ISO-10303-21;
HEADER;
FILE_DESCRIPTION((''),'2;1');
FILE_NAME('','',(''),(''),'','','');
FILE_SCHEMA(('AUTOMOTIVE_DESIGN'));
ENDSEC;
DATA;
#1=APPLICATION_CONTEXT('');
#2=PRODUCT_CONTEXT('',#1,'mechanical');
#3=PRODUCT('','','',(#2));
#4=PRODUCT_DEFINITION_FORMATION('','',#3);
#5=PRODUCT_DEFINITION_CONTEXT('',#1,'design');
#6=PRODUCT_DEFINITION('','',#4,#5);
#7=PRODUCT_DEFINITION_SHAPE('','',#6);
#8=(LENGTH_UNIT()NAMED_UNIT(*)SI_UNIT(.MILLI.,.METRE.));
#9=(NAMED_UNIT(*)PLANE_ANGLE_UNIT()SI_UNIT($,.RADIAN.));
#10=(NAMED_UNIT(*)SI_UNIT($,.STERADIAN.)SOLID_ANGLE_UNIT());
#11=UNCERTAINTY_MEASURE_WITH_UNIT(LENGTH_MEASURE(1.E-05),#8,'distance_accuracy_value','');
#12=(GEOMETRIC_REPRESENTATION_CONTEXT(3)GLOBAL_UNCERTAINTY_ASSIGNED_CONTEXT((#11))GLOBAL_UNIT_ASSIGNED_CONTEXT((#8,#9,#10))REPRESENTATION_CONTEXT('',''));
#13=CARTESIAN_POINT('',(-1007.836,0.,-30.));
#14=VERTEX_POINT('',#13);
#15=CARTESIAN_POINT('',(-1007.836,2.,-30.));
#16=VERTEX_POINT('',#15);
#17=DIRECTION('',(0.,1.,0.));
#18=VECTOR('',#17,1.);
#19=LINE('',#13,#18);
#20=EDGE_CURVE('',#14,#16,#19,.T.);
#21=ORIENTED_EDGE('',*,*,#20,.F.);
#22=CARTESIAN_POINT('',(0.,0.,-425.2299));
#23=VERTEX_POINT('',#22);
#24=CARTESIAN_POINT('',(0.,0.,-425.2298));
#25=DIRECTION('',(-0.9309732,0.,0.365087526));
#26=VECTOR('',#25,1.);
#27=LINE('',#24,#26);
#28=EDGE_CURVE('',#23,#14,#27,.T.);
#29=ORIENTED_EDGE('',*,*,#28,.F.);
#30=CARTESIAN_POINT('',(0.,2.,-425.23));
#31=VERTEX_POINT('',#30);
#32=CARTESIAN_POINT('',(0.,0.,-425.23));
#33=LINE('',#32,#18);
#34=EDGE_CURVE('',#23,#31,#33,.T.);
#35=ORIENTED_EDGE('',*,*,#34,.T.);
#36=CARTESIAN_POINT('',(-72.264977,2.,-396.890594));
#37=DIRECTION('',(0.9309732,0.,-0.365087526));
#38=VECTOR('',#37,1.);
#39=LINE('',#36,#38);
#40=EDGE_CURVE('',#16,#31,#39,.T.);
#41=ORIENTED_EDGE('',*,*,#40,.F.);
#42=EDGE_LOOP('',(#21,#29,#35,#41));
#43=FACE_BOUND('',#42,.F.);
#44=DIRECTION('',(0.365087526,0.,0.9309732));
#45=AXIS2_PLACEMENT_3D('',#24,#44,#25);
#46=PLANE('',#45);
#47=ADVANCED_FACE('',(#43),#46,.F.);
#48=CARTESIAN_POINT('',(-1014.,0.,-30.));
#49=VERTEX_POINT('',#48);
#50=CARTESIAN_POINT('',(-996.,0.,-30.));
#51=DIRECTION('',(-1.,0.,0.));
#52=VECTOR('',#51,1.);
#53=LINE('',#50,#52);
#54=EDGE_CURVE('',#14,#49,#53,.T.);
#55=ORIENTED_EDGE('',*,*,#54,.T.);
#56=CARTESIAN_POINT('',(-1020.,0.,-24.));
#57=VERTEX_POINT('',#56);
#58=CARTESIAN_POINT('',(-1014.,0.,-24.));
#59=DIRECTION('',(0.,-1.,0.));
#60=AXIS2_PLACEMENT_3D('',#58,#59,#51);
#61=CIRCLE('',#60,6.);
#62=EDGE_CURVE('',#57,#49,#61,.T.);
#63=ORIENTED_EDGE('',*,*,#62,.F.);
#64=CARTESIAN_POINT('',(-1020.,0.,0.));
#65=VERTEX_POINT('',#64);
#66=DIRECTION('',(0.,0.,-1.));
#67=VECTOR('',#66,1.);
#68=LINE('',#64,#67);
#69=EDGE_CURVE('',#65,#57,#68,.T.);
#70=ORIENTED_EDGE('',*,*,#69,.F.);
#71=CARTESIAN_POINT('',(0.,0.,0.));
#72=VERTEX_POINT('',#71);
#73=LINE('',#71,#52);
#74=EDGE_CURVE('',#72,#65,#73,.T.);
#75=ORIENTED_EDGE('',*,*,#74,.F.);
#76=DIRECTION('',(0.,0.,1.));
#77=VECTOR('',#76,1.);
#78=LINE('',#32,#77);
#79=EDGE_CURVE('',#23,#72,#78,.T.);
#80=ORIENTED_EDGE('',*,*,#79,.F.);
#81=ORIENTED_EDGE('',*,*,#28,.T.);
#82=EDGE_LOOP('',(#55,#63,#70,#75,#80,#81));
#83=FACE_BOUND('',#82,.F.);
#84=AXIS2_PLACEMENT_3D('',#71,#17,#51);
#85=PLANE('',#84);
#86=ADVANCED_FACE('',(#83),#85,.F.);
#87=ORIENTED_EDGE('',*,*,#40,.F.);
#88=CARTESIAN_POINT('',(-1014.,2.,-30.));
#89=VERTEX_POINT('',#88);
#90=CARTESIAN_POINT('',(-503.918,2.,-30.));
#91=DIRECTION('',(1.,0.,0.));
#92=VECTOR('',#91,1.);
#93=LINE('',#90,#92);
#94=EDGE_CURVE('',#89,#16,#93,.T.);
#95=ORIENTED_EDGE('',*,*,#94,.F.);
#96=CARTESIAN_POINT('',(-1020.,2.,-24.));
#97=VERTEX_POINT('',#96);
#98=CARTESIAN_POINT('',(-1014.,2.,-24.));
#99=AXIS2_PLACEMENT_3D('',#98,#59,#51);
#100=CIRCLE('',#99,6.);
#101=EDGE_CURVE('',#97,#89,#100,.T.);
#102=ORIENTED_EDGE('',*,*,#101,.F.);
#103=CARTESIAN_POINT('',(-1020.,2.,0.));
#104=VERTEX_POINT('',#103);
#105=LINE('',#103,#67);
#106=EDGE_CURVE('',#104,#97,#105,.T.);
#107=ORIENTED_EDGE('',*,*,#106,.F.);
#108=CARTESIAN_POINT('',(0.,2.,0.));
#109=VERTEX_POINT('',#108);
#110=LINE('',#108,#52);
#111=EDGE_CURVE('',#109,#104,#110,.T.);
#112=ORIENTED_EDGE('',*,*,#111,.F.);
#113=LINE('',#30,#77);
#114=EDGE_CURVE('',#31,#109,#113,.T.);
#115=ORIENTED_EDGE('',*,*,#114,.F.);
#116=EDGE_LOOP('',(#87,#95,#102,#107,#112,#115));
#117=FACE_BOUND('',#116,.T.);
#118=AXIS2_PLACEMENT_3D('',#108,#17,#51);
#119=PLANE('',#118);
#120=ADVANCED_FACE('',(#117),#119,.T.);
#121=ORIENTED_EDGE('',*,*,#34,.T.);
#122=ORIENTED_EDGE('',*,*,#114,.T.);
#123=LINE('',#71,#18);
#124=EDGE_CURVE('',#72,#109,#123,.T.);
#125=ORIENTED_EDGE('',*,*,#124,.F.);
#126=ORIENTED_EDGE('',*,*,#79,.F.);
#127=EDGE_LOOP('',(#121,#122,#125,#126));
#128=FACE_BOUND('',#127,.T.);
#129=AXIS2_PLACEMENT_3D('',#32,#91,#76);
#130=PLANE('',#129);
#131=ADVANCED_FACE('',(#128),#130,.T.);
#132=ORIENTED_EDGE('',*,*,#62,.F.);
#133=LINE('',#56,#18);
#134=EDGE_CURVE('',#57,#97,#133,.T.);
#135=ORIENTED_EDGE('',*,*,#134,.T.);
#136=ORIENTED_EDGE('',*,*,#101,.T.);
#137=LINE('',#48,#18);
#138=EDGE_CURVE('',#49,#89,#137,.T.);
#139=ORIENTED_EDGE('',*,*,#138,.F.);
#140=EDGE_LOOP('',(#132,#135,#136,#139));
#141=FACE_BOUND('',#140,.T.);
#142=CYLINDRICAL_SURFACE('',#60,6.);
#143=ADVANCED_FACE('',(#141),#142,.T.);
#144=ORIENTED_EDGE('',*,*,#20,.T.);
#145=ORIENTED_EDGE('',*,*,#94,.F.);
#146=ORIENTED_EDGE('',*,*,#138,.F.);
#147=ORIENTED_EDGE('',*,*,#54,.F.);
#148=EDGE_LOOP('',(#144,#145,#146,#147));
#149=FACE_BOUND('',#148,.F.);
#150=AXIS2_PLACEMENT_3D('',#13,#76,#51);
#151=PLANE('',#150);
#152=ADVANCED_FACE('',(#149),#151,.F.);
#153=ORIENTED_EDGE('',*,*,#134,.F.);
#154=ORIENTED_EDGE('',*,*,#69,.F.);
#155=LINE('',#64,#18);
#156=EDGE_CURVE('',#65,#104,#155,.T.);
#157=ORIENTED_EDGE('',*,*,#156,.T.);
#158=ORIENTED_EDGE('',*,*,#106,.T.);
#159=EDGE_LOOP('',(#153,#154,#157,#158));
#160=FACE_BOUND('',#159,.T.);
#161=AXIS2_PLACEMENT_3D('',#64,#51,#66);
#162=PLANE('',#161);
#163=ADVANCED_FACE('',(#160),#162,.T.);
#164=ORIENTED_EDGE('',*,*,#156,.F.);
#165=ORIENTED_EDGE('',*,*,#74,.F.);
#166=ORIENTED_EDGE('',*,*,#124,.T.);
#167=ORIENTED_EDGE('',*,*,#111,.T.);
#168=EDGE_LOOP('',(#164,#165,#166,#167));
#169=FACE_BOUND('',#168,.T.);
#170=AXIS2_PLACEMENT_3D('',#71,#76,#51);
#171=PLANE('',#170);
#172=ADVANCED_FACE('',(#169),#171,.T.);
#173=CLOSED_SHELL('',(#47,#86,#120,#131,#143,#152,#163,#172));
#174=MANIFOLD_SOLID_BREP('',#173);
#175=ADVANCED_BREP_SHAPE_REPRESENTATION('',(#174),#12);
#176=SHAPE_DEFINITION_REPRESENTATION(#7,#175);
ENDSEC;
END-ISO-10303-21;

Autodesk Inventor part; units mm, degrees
ref_plane "YZ Plane" through (0, 0, 0) normal (1, 0, 0) x (0, 1, 0)
ref_plane "XZ Plane" through (0, 0, 0) normal (0, 1, 0) x (-1, 0, 0)
ref_plane "XY Plane" through (0, 0, 0) normal (0, 0, 1) x (1, 0, 0)
sketch "Sketch1" plane through (0, 0, 0) normal (0, 1, 0) x (-1, 0, 0)
  line L0 (0, 0) -> (1020, 0)
  line L1 (0, -425.23) -> (0, 0)
  line L2 (1020, 0) -> (1020, -425.23)
  line L3 (1020, -425.23) -> (0, -425.23)
  dimension "d0" = 425.23
  dimension "d1" = 1020
extrude "Plate1" add sketch "Sketch1" along normal blind 2
sketch "Sketch2" plane through (0, 0, 0) normal (0, -1, 0) x (1, 0, 0)
  line L0 (0, -425.2298) -> (-1007.836, -30) projected
  line L1 (-996, -30) -> (-1014, -30) projected
  arc A0 (-1020, -24) -> (-1014, -30) centre (-1014, -24) ccw projected
  line L2 (0, -425.23) -> (-1020, -425.23) projected
  line L3 (0, 0) -> (0, -425.23) projected
  line L4 (-1020, 0) -> (0, 0) projected
  line L5 (-1020, -425.23) -> (-1020, 0) projected
extrude "Extrusion1" cut sketch "Sketch2" against normal through all contours L2 L5 A0 L1 L0
equation "\"d2\" = Thickness"
equation "\"BendRadius\" = Thickness"
equation "\"BendReliefWidth\" = Thickness"
equation "\"BendReliefDepth\" = 0.5 * Thickness"
equation "\"CornerReliefSize\" = 4 * Thickness"
equation "\"MinimumRemnant\" = 2 * Thickness"
equation "\"TransitionRadius\" = BendRadius"
equation "\"JacobiRadiusSize\" = BendRadius"
equation "\"GapSize\" = Thickness"
equation "\"Thickness\" = 2"
properties part number "taringle"
